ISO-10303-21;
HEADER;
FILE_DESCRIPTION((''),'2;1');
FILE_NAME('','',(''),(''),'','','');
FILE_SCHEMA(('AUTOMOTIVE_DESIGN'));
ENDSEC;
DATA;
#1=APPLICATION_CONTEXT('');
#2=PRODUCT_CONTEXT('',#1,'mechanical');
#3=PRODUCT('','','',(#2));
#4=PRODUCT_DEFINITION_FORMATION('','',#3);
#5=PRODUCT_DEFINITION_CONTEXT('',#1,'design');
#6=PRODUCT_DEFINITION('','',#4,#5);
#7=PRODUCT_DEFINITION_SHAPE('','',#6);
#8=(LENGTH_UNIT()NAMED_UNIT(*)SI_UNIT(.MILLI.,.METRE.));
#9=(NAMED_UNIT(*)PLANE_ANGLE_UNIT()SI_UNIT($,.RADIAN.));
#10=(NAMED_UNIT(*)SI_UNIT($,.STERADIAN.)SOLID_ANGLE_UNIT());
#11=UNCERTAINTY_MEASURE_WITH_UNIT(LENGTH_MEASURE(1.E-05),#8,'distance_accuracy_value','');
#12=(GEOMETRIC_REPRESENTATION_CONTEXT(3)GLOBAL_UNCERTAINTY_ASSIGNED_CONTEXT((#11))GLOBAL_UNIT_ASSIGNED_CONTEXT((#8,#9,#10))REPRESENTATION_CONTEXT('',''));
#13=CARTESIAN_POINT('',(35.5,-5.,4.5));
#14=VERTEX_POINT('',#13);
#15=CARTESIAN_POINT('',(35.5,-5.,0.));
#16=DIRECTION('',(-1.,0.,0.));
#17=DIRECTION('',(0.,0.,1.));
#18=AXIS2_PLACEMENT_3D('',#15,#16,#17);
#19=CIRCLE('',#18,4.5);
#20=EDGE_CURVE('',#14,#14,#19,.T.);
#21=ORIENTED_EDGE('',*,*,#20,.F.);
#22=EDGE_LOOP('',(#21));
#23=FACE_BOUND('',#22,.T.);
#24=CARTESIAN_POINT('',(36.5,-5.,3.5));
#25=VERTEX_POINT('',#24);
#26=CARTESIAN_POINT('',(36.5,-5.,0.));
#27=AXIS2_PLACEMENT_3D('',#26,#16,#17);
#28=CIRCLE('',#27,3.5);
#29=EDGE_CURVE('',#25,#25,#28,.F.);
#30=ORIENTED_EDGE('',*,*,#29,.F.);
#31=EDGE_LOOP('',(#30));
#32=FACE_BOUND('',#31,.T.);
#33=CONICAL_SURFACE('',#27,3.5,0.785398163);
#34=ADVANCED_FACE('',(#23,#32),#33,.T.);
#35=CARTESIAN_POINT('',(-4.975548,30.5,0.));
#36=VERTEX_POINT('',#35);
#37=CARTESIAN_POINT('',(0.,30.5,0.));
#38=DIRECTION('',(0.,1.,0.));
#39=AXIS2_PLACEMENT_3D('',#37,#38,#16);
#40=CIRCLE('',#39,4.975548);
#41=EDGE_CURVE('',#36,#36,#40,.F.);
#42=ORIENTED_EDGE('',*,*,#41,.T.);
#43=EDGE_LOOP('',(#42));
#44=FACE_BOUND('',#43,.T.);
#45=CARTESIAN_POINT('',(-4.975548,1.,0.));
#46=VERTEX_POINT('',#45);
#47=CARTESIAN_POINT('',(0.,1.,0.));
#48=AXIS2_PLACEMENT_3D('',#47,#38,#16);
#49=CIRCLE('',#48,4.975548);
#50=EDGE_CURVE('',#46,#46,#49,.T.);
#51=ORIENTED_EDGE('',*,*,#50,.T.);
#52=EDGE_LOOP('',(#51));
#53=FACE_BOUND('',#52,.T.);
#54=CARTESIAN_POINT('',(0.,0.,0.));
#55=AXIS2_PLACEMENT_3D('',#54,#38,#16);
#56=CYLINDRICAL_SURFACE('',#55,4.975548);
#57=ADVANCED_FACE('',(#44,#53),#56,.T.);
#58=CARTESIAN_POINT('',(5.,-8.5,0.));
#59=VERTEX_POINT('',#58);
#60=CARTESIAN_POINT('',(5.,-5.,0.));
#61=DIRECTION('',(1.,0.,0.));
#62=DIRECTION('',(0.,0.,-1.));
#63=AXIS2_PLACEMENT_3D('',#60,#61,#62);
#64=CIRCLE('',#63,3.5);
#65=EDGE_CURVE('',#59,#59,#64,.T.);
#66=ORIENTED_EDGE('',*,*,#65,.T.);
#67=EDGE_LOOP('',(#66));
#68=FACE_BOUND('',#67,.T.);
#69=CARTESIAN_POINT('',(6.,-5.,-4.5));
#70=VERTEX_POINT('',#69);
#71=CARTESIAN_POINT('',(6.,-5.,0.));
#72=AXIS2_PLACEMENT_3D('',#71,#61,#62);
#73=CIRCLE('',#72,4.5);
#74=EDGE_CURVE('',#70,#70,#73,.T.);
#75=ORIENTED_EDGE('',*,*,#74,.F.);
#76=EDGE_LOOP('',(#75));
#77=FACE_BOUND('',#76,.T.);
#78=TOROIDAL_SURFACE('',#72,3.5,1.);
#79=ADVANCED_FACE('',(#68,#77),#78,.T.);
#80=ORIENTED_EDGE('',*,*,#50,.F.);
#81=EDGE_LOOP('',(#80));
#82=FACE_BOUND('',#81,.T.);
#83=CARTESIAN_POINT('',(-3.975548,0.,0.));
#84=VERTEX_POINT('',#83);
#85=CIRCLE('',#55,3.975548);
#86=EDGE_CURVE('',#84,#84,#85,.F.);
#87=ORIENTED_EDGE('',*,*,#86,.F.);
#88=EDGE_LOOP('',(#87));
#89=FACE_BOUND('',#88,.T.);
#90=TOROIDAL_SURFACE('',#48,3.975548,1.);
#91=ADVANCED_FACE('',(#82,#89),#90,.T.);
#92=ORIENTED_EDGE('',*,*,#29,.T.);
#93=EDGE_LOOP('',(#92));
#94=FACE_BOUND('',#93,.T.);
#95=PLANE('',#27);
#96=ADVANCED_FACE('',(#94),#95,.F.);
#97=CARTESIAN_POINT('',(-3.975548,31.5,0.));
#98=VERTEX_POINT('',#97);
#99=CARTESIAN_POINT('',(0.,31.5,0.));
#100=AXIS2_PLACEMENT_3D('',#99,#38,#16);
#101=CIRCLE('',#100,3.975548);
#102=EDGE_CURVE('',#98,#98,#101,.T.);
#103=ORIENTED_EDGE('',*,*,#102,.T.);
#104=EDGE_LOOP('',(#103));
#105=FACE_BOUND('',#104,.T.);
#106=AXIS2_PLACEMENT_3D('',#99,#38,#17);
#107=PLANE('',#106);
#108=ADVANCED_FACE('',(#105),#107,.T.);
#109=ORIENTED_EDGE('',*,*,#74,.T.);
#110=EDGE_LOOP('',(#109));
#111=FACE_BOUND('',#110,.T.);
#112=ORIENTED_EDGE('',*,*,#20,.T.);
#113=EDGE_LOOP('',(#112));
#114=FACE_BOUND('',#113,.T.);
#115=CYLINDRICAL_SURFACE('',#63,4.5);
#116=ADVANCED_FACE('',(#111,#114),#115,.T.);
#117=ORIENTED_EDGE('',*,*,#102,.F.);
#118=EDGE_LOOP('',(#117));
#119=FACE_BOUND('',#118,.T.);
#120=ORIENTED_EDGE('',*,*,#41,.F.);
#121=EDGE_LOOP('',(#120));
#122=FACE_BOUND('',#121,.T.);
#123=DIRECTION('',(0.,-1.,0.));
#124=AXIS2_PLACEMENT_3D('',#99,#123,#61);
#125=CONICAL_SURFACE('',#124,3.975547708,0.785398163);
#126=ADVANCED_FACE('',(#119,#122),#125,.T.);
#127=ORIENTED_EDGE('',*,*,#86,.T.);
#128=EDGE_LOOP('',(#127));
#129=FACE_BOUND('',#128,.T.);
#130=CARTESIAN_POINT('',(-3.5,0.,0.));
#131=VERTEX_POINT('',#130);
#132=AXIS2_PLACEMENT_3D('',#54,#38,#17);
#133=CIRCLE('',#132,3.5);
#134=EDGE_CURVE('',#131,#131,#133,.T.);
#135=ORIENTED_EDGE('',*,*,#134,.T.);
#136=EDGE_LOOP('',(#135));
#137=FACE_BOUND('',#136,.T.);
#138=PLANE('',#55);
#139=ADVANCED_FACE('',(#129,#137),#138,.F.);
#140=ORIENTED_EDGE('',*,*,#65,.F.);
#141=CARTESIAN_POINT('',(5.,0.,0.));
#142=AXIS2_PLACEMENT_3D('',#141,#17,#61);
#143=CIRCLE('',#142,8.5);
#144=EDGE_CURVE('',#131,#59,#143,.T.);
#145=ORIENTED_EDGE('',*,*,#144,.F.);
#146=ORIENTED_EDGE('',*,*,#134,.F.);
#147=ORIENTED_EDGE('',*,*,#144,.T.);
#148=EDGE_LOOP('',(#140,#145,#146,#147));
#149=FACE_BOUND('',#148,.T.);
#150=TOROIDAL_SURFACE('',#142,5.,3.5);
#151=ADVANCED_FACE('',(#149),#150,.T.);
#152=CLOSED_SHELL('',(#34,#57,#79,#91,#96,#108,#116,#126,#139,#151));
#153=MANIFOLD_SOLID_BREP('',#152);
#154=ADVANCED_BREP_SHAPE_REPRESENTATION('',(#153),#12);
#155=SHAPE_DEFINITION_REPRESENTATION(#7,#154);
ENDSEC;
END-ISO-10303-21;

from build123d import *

# Parameters (mm, degrees)
SWEEP1_PROFILE_R    = 3.5
SKETCH10_R          = 4.975547708
BOSS_EXTRUDE1_DEPTH = 31.5
SKETCH11_R          = 4.5
BOSS_EXTRUDE2_DEPTH = 31.5
CHAMFER1_SIZE       = 1
CHAMFER2_SIZE       = 1
FILLET3_R           = 1


with BuildPart() as part:
    # Sweep1: sweep along a path in Sketch1
    with BuildLine(Plane.XY) as sweep1_path:
        Line((0, 31.5), (0, 0))
        ThreePointArc((0, 0), (1.464466094, -3.535533906), (5, -5))
        Line((5, -5), (36.5, -5))
    # Sweep1 profile (on start of the path) → Sweep1 (sweep)
    with BuildSketch(Plane(origin=(0, 31.5, 0), x_dir=(-1, 0, 0), z_dir=(0, -1, 0))):
        Circle(SWEEP1_PROFILE_R)
    sweep(path=sweep1_path.line)

    # Sketch10 → Boss-Extrude1 (add)
    with BuildSketch(Plane(origin=(0, 31.5, 0), x_dir=(1, 0, 0), z_dir=(0, 1, 0))):
        with Locations(Location((0, 0, 0), (0, 0, 180))):
            Circle(SKETCH10_R)
    extrude(amount=-BOSS_EXTRUDE1_DEPTH)

    # Sketch11 → Boss-Extrude2 (add)
    with BuildSketch(Plane(origin=(36.5, 0, 0), x_dir=(0, 0, -1), z_dir=(1, 0, 0))):
        with Locations((0, -5)):
            Circle(SKETCH11_R)
    extrude(amount=-BOSS_EXTRUDE2_DEPTH)

    # Chamfer1
    chamfer1_edges = [part.edges().sort_by_distance(p)[0] for p in [
        (4.975547708, 31.5, 0),
    ]]
    chamfer(chamfer1_edges, length=CHAMFER1_SIZE)

    # Chamfer2
    chamfer2_edges = [part.edges().sort_by_distance(p)[0] for p in [
        (36.5, -5, 4.5),
    ]]
    chamfer(chamfer2_edges, length=CHAMFER2_SIZE)

    # Fillet3
    fillet3_edges = [part.edges().sort_by_distance(p)[0] for p in [
        (5, -5, 4.5),
        (4.975547708, 0, 0),
    ]]
    fillet(fillet3_edges, radius=FILLET3_R - 0.0001)  # a hair under: the kernel refuses the full size


solid = part.part
